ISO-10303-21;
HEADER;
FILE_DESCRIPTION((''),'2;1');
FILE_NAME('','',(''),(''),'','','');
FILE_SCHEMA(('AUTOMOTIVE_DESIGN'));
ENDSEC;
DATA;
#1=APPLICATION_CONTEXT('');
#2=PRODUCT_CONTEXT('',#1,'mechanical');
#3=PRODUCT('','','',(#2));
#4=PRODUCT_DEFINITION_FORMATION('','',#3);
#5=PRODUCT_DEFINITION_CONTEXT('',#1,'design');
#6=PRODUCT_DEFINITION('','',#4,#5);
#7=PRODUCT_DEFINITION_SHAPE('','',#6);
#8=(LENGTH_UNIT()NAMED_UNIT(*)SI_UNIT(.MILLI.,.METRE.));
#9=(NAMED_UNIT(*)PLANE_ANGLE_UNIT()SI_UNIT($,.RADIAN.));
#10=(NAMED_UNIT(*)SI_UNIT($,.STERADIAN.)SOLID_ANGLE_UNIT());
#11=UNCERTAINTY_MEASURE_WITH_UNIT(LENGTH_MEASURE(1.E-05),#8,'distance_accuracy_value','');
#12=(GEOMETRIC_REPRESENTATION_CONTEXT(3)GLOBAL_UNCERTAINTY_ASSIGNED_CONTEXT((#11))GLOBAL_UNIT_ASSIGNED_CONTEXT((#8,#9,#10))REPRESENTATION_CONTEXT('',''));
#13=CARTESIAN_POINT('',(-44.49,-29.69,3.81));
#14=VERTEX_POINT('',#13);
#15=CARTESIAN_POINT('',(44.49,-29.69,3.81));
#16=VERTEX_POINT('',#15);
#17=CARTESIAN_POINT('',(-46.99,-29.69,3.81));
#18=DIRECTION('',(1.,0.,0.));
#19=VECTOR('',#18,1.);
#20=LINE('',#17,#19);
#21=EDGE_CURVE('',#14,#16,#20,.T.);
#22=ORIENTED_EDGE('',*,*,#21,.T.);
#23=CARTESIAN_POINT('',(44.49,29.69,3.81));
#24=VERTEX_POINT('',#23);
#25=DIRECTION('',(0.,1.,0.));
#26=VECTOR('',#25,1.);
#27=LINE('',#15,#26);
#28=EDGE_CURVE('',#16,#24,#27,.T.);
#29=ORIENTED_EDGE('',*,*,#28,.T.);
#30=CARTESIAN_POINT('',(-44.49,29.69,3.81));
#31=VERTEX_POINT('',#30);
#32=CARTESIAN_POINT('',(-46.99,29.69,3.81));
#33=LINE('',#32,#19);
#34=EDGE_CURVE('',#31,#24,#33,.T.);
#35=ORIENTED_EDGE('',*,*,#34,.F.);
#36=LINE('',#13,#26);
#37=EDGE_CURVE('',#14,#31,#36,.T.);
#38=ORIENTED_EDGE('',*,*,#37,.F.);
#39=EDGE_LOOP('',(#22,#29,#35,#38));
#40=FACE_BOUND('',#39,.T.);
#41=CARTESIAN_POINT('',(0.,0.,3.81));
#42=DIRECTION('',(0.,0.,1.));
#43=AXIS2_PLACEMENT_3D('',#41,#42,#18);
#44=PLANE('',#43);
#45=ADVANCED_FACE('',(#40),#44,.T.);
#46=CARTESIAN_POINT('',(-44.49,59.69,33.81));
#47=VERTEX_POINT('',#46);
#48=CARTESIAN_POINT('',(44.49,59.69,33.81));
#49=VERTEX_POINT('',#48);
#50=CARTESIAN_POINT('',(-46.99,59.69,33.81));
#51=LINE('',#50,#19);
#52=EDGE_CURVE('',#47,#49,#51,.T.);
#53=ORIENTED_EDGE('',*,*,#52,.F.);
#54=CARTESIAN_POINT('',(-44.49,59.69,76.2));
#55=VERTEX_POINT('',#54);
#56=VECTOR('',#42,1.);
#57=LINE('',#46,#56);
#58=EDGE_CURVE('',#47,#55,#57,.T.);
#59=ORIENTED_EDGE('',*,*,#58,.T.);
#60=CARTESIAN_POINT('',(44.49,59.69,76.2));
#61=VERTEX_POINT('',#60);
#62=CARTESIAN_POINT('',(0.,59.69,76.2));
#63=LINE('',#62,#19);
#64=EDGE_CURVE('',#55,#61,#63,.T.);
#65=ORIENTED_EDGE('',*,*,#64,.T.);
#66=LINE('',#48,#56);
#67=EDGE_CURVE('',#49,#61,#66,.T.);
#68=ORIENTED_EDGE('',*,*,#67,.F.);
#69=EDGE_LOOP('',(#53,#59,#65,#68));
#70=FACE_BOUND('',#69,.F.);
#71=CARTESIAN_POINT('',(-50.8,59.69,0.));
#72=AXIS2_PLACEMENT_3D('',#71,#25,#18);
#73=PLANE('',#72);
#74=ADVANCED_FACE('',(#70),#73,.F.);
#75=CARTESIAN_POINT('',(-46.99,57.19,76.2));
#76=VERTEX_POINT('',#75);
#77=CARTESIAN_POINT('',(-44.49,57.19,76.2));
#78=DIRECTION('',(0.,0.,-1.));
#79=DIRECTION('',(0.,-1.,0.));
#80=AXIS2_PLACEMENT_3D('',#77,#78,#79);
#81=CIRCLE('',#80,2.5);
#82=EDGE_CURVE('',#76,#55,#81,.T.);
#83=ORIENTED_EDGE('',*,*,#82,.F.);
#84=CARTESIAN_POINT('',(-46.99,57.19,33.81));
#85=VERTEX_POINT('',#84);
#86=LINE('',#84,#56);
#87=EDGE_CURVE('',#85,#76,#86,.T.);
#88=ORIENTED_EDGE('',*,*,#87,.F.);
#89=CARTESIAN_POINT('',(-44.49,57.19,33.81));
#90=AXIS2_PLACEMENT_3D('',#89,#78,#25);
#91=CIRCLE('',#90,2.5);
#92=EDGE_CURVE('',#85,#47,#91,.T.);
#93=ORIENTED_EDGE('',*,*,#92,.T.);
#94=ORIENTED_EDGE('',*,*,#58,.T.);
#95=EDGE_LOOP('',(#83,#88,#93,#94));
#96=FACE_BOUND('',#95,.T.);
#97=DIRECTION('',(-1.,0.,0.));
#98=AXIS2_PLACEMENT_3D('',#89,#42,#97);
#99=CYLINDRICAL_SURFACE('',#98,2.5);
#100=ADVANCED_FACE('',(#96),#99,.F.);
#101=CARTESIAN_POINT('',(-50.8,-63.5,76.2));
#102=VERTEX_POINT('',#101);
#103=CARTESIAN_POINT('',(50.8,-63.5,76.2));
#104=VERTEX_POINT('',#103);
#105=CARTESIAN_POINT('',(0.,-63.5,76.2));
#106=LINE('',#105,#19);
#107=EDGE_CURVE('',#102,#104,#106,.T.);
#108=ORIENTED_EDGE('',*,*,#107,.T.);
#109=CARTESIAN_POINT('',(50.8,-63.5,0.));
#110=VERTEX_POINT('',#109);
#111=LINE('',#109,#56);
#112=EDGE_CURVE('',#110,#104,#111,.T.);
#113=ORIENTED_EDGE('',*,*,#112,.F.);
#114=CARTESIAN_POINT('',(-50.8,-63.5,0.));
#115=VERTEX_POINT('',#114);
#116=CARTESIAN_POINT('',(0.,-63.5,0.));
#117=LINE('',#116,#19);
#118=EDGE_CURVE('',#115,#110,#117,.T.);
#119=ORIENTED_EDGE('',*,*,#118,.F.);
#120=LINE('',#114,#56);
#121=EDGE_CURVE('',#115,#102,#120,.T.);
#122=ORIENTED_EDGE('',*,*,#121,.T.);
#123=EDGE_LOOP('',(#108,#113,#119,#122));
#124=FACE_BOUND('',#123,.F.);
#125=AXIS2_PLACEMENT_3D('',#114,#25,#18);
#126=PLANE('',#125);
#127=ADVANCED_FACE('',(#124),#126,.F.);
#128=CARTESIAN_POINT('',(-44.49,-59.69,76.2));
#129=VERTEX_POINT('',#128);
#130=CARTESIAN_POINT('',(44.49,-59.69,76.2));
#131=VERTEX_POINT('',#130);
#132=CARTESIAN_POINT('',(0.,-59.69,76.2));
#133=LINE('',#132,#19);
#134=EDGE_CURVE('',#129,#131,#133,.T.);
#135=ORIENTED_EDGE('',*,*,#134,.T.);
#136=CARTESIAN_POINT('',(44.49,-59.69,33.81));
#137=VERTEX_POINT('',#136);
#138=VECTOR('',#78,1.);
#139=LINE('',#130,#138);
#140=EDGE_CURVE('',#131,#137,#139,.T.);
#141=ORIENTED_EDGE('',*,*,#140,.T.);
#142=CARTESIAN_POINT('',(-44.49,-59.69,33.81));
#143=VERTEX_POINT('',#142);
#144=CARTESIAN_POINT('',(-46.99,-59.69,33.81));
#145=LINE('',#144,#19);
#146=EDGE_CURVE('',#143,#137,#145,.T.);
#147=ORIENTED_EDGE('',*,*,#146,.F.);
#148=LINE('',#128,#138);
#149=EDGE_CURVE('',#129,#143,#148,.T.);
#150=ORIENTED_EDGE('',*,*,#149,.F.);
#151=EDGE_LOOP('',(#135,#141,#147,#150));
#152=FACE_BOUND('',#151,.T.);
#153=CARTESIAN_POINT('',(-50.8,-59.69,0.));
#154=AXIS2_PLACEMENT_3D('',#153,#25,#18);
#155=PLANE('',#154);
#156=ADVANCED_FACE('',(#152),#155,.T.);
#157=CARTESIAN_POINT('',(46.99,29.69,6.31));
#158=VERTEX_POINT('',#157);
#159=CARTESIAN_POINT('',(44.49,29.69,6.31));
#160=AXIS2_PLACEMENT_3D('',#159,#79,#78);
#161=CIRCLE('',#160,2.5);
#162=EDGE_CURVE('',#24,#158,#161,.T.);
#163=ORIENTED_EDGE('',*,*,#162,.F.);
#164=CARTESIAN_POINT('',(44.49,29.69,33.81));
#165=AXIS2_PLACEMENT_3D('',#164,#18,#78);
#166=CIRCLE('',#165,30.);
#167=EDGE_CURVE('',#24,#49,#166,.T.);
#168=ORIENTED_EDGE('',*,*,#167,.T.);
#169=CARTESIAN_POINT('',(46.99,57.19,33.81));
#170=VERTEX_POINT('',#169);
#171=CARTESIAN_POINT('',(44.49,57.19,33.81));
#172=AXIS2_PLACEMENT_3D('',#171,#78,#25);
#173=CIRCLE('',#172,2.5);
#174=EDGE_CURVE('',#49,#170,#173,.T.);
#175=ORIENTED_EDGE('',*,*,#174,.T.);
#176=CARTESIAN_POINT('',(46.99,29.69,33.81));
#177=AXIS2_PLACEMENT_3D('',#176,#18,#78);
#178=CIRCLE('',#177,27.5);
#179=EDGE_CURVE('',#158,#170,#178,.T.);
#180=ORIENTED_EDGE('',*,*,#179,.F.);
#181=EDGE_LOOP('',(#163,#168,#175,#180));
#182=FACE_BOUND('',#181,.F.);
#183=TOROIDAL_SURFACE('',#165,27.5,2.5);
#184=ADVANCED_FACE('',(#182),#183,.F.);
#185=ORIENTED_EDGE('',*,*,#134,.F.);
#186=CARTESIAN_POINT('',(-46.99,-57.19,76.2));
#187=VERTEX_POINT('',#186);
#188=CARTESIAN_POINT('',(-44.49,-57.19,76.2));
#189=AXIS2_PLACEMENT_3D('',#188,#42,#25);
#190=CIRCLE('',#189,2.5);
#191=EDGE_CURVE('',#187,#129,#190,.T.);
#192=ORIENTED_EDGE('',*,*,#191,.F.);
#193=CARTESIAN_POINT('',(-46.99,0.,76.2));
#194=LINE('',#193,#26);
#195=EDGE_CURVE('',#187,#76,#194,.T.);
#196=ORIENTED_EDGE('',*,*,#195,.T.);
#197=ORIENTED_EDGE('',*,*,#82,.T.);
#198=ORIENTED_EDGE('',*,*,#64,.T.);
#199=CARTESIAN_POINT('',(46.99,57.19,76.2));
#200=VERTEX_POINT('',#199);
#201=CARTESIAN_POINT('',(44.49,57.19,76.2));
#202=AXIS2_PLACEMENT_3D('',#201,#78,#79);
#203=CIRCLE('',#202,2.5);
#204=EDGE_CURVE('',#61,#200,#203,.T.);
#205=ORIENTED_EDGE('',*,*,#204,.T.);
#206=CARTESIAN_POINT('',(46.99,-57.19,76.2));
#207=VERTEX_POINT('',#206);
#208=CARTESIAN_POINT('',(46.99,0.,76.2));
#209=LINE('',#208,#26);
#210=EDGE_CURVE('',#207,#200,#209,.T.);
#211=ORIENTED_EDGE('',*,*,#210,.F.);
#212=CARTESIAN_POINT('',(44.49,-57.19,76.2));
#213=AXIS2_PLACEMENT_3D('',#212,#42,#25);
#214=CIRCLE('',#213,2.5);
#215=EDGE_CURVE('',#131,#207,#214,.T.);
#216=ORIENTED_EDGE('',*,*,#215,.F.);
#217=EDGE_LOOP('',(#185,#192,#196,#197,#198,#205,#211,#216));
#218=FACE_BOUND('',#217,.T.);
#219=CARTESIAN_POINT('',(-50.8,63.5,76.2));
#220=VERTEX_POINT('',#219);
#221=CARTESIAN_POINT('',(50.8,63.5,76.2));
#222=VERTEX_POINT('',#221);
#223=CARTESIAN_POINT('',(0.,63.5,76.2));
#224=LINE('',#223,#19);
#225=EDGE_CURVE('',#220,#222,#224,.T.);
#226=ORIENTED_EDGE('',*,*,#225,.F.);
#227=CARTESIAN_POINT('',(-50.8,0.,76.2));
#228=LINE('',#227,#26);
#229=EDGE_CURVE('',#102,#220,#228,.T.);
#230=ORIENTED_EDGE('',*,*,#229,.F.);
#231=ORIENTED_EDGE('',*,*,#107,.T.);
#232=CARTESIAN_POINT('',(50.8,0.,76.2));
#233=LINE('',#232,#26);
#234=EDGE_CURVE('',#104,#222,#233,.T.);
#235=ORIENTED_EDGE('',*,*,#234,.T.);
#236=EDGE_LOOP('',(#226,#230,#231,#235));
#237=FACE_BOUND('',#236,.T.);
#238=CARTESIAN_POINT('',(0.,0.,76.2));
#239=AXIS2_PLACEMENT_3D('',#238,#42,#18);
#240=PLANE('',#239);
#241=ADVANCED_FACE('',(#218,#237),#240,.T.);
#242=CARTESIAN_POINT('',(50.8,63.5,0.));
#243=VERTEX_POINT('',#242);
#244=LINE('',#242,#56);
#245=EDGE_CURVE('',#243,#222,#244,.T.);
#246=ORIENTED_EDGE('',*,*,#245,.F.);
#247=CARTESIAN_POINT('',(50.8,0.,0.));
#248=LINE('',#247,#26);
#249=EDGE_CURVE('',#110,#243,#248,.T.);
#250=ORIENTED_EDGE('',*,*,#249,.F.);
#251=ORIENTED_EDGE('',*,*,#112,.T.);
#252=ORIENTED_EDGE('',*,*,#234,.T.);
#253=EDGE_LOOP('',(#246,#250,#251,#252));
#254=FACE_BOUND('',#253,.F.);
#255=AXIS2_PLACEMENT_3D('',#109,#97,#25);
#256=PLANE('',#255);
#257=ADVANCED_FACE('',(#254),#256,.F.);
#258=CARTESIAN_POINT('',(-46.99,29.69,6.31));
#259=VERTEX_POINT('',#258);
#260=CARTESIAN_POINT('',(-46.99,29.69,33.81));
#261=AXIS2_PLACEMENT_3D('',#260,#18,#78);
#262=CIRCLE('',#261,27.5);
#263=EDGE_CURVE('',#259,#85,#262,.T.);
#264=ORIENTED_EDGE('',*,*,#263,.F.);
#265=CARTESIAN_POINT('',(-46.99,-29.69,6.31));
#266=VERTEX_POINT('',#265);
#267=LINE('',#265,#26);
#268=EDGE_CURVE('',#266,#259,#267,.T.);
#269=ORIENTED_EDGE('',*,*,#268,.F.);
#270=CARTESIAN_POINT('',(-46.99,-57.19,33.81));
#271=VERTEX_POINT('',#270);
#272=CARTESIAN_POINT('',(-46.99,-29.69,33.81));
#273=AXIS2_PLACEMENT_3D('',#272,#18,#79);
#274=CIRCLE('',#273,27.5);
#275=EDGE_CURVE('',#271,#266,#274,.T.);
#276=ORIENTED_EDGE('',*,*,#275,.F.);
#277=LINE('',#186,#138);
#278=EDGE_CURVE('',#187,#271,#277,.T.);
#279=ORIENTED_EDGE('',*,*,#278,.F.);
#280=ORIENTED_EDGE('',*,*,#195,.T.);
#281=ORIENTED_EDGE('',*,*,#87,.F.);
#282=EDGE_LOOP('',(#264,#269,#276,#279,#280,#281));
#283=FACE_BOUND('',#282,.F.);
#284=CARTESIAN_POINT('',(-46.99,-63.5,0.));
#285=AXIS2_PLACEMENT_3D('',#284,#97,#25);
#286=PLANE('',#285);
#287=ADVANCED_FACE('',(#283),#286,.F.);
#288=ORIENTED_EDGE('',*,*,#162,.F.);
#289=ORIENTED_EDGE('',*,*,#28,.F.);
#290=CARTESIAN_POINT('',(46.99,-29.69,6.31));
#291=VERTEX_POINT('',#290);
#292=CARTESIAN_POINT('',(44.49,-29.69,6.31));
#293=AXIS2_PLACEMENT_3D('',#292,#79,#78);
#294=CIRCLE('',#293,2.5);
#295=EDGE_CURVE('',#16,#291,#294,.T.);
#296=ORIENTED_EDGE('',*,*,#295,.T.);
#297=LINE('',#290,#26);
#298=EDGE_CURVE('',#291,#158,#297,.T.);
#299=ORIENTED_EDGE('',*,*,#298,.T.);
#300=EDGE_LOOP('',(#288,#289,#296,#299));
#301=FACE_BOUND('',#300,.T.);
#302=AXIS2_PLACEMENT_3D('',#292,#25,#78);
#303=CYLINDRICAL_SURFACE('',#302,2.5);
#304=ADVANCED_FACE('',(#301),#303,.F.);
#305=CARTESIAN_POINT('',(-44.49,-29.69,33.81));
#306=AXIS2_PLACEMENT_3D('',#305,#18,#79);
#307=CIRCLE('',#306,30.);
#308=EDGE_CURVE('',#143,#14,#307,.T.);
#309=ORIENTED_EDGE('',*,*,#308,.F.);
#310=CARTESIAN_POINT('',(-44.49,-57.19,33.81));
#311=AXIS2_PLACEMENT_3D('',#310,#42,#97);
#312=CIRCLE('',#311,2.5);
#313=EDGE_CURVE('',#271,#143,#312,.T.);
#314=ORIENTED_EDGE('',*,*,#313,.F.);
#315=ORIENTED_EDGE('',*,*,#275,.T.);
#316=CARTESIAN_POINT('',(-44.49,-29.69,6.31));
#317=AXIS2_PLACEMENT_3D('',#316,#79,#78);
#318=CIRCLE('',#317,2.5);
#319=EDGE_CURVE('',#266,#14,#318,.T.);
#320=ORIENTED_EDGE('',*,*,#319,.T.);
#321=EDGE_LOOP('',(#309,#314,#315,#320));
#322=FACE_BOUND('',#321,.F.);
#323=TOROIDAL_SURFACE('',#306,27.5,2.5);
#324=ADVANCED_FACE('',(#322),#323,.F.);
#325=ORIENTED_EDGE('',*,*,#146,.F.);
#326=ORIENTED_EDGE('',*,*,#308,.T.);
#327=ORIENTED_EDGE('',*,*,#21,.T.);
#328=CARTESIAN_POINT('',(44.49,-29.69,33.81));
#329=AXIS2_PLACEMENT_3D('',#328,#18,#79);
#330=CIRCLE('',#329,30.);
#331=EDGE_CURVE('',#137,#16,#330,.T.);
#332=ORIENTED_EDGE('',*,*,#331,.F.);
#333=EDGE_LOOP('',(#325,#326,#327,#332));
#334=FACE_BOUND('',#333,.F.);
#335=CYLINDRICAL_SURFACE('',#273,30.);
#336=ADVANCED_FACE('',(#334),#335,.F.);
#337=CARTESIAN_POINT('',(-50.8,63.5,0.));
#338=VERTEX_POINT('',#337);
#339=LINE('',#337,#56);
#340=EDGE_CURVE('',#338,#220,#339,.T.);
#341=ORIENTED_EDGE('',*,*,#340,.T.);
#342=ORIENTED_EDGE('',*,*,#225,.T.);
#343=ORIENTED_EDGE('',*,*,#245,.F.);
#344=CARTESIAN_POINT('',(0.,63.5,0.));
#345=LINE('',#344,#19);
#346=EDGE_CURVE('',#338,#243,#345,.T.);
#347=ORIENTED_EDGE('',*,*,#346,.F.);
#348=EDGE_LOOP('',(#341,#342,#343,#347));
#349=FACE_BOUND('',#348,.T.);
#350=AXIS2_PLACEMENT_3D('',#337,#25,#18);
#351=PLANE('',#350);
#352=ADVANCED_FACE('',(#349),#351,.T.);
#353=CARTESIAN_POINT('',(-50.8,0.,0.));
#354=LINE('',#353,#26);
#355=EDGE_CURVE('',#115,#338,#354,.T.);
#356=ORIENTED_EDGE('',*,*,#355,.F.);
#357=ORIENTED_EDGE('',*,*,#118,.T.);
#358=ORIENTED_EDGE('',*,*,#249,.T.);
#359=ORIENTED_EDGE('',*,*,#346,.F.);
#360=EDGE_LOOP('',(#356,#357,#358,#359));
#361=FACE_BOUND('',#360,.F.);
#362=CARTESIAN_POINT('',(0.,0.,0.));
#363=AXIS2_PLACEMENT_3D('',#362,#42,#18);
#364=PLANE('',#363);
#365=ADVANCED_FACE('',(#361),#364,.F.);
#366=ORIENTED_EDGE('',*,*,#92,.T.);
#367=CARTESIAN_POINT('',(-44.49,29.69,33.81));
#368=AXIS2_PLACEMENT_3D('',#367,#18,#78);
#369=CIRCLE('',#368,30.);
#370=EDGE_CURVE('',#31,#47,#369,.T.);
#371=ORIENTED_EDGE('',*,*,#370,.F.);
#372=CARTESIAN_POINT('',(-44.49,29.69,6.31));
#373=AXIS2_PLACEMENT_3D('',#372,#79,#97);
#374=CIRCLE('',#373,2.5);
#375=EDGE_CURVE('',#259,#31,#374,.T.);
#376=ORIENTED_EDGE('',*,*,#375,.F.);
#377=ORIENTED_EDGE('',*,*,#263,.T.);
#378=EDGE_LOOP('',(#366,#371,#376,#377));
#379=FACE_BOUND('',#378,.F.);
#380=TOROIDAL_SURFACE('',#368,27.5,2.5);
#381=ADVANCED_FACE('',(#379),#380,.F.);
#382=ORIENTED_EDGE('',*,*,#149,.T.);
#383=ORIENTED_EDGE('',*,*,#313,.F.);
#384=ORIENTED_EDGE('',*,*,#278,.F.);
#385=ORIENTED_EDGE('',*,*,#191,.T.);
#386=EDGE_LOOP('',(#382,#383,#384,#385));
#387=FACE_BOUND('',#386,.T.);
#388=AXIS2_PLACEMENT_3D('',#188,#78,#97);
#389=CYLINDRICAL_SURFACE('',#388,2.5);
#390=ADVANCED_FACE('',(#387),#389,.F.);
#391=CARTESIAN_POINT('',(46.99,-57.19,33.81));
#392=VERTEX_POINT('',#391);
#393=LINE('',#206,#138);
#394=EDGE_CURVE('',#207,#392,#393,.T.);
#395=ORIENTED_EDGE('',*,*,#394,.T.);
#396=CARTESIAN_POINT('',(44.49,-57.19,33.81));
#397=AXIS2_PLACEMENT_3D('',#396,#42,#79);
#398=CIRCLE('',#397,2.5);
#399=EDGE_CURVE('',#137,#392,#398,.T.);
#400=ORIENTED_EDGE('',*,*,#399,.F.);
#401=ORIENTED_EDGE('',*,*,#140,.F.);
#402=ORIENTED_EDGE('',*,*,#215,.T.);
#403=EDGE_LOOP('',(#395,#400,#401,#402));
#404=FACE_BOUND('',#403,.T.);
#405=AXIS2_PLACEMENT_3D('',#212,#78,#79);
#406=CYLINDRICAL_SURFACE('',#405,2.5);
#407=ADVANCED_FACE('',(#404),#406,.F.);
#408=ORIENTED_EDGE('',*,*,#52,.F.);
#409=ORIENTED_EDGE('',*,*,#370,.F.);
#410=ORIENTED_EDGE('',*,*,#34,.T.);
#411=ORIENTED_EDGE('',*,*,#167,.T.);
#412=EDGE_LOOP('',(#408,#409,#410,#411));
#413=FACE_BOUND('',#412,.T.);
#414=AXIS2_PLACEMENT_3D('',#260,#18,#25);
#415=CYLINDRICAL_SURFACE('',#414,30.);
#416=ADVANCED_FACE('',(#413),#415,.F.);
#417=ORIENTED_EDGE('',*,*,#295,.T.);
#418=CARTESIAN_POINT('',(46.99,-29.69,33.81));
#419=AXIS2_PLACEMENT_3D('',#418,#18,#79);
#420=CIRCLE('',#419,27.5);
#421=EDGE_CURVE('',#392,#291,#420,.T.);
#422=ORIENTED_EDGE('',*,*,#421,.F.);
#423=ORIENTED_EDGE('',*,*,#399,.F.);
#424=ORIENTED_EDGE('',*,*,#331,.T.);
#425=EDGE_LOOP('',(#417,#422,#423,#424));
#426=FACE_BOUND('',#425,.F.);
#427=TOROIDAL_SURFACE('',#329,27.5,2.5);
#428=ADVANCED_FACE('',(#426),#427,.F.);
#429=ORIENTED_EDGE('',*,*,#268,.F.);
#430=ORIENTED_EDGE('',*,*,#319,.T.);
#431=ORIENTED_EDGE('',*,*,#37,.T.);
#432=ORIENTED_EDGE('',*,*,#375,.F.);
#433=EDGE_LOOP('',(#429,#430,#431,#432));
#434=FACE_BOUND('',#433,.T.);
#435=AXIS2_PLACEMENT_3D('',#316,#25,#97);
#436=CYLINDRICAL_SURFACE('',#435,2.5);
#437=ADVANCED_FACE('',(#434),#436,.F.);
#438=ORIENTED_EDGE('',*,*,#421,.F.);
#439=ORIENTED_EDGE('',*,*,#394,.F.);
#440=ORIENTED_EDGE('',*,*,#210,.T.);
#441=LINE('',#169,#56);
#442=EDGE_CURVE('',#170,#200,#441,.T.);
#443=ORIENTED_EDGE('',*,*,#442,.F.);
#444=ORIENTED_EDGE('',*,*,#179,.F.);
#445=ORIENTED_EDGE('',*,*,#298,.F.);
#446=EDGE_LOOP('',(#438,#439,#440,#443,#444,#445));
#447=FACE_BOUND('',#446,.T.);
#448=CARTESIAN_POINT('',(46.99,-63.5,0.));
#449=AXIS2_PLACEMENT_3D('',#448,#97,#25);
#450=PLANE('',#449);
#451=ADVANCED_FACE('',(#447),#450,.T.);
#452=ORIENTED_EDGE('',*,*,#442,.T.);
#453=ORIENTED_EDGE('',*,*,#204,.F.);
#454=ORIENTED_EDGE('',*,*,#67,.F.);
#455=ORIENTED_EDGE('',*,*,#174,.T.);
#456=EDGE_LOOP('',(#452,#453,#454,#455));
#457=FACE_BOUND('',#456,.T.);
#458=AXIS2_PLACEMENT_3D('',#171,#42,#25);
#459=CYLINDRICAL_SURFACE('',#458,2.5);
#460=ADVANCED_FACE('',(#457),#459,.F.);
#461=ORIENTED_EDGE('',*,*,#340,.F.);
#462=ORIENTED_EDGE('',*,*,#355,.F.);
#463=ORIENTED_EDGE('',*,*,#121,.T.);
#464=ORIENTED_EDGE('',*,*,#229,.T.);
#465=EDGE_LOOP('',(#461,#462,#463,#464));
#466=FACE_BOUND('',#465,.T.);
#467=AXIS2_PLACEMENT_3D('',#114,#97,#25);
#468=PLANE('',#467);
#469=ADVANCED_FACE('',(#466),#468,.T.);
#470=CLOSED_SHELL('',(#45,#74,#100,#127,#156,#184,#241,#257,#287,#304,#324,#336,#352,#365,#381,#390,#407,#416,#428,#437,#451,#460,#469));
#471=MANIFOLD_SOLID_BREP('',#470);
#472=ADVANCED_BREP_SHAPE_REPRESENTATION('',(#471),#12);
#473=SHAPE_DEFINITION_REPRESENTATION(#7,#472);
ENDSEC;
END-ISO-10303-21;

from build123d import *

# Parameters (mm, degrees)
F0_W     = 101.6
F0_H     = 127
F1_DEPTH = 76.2
F2_T     = -3.81
F3_R     = 30
F4_R     = 2.5
F5_DEPTH = 76.2


with BuildPart() as f1:
    # F0 (on Top) → F1 (new body)
    with BuildSketch(Plane.XY):
        Rectangle(F0_W, F0_H)
    extrude(amount=F1_DEPTH)

    # F2
    f2_openings = [f1.faces().sort_by_distance(p)[0] for p in [
        (0, 0, 76.2),
    ]]
    offset(amount=F2_T, openings=f2_openings)

    # F3
    f3_edges = [f1.edges().sort_by_distance(p)[0] for p in [
        (0, 59.69, 3.81),
        (0, -59.69, 3.81),
    ]]
    fillet(f3_edges, radius=F3_R)

    # F4
    f4_edges = [f1.edges().sort_by_distance(p)[0] for p in [
        (-46.99, -50.903203, 12.596797),
        (46.99, -50.903203, 12.596797),
    ]]
    fillet(f4_edges, radius=F4_R)

    # F5 (add): a face of the model
    f5_faces = [f1.faces().sort_by_distance(p)[0] for p in [
        (0, -61.3163935563, 76.2),
    ]]
    extrude(f5_faces, amount=-F5_DEPTH)


solid = f1.part
